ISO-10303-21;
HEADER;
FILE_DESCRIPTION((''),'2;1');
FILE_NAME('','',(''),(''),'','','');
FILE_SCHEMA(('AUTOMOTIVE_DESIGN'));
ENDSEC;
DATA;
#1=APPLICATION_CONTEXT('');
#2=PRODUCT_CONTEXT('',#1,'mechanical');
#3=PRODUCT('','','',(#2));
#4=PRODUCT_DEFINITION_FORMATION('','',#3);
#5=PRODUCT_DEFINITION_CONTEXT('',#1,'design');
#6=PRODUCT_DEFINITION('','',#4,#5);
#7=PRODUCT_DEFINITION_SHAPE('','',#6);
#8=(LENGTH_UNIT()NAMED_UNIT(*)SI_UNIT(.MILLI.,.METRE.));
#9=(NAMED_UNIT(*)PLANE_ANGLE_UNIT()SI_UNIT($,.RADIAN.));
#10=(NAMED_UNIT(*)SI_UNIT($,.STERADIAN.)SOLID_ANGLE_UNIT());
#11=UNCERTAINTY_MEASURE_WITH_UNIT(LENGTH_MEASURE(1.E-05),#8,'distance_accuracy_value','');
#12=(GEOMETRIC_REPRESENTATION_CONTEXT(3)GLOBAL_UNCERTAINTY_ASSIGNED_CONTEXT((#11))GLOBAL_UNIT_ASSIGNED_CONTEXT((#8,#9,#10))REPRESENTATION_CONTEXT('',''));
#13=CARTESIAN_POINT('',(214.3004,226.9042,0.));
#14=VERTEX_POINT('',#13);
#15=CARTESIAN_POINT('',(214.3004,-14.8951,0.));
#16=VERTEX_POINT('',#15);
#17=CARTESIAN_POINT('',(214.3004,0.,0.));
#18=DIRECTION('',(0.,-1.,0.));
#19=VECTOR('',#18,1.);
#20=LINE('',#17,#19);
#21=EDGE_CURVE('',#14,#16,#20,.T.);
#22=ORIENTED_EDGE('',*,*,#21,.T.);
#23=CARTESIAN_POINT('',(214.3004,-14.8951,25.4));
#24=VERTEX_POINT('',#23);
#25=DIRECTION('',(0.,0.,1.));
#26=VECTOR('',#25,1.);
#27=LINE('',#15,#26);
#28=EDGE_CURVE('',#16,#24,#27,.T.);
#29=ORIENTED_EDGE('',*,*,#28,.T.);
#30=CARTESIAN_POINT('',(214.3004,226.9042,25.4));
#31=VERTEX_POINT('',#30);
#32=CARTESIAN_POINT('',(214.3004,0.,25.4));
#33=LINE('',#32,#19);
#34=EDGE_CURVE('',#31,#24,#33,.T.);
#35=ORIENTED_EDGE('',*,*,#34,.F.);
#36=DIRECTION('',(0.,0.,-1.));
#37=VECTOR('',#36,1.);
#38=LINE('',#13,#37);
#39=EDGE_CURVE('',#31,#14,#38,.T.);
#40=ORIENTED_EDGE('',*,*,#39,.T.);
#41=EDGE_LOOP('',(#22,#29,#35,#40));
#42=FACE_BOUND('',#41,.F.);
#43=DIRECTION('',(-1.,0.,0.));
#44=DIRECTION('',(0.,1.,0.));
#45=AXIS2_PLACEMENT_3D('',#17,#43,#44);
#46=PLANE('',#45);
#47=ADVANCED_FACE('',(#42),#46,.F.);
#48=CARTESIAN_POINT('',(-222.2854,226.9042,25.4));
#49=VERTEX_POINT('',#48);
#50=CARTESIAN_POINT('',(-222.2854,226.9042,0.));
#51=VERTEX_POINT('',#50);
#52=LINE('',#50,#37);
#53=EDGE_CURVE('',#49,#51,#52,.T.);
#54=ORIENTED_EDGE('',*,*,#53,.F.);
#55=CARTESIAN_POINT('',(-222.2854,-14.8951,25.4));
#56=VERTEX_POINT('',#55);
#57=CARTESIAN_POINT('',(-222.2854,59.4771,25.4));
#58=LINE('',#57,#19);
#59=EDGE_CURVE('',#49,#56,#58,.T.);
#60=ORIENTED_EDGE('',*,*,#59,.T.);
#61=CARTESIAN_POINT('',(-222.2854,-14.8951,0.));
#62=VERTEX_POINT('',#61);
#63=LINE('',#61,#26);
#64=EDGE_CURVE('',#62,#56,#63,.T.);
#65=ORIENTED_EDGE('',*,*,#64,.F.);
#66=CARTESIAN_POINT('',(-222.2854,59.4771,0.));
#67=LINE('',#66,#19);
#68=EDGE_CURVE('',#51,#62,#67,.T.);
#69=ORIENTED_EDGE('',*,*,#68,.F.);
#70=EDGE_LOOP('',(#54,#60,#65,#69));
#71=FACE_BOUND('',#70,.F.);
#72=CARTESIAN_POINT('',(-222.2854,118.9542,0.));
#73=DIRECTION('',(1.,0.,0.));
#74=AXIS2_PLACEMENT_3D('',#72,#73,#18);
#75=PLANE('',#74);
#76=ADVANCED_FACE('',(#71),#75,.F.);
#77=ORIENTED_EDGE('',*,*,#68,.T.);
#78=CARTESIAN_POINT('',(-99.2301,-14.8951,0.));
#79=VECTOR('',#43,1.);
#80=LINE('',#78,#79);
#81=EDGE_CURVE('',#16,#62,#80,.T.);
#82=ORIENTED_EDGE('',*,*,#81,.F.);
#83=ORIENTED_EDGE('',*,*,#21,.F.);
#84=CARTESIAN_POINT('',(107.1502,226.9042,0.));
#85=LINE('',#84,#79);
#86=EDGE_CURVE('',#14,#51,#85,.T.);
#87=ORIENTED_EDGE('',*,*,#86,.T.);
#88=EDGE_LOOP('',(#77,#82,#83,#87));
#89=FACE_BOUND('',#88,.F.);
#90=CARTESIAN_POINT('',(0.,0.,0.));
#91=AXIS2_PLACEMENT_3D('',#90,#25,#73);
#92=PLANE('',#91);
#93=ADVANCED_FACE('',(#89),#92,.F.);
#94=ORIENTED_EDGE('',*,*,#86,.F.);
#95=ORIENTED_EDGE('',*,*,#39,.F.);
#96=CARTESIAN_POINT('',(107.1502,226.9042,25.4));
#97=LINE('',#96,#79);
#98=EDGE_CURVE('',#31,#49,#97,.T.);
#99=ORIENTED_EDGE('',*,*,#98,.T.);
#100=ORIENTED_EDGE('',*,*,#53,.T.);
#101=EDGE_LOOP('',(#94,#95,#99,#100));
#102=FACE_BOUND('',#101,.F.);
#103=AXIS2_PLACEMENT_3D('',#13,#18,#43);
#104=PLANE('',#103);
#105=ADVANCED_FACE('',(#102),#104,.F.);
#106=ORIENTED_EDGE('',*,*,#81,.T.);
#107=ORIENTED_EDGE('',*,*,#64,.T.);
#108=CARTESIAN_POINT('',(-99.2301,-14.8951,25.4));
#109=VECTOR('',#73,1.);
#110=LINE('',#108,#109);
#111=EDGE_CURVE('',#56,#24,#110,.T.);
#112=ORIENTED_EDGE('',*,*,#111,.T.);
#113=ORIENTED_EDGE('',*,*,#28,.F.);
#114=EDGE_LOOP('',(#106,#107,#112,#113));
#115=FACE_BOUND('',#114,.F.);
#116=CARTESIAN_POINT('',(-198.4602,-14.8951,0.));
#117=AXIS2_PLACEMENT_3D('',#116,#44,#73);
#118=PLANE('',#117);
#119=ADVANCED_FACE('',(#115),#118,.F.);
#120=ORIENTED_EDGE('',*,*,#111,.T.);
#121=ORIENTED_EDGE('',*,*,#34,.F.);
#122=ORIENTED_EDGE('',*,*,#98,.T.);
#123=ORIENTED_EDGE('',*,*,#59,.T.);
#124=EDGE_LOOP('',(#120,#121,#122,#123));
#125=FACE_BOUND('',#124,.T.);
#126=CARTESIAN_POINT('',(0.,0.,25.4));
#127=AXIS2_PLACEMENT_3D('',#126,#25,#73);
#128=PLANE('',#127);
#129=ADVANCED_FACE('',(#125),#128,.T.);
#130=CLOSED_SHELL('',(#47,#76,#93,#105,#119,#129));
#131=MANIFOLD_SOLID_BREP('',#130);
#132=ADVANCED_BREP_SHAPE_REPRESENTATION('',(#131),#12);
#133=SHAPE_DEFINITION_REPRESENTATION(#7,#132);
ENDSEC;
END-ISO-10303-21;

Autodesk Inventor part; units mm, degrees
ref_plane "YZ Plane" through (0, 0, 0) normal (1, 0, 0) x (0, 1, 0)
ref_plane "XZ Plane" through (0, 0, 0) normal (0, 1, 0) x (-1, 0, 0)
ref_plane "XY Plane" through (0, 0, 0) normal (0, 0, 1) x (1, 0, 0)
sketch "Sketch1" plane through (0, 0, 0) normal (0, 0, 1) x (1, 0, 0)
  line L0 (-198.4602, 0) -> (214.3004, 0)
  line L1 (214.3004, 0) -> (214.3004, 118.9542)
  line L2 (214.3004, 118.9542) -> (-198.4602, 118.9542)
  line L3 (-198.4602, 118.9542) -> (-198.4602, 0)
  point P0 (0, 0)
extrude "Extrusion1" add sketch "Sketch1" along normal blind 25.4
move faces "Move1" translate (0, -14.8951, 0) faces at (-60.8733, 0, 8.4667)
move faces "Move2" translate (0, 107.95, 0) faces at (-60.8733, 118.9542, 16.9333)
move faces "Move3" translate (-122.2502, 0, 0) faces at (-198.4602, 65.7047, 16.9333)
move faces "Move4" translate (98.425, 0, 0) faces at (-320.7104, 65.7047, 16.9333)
properties part number "Table"
